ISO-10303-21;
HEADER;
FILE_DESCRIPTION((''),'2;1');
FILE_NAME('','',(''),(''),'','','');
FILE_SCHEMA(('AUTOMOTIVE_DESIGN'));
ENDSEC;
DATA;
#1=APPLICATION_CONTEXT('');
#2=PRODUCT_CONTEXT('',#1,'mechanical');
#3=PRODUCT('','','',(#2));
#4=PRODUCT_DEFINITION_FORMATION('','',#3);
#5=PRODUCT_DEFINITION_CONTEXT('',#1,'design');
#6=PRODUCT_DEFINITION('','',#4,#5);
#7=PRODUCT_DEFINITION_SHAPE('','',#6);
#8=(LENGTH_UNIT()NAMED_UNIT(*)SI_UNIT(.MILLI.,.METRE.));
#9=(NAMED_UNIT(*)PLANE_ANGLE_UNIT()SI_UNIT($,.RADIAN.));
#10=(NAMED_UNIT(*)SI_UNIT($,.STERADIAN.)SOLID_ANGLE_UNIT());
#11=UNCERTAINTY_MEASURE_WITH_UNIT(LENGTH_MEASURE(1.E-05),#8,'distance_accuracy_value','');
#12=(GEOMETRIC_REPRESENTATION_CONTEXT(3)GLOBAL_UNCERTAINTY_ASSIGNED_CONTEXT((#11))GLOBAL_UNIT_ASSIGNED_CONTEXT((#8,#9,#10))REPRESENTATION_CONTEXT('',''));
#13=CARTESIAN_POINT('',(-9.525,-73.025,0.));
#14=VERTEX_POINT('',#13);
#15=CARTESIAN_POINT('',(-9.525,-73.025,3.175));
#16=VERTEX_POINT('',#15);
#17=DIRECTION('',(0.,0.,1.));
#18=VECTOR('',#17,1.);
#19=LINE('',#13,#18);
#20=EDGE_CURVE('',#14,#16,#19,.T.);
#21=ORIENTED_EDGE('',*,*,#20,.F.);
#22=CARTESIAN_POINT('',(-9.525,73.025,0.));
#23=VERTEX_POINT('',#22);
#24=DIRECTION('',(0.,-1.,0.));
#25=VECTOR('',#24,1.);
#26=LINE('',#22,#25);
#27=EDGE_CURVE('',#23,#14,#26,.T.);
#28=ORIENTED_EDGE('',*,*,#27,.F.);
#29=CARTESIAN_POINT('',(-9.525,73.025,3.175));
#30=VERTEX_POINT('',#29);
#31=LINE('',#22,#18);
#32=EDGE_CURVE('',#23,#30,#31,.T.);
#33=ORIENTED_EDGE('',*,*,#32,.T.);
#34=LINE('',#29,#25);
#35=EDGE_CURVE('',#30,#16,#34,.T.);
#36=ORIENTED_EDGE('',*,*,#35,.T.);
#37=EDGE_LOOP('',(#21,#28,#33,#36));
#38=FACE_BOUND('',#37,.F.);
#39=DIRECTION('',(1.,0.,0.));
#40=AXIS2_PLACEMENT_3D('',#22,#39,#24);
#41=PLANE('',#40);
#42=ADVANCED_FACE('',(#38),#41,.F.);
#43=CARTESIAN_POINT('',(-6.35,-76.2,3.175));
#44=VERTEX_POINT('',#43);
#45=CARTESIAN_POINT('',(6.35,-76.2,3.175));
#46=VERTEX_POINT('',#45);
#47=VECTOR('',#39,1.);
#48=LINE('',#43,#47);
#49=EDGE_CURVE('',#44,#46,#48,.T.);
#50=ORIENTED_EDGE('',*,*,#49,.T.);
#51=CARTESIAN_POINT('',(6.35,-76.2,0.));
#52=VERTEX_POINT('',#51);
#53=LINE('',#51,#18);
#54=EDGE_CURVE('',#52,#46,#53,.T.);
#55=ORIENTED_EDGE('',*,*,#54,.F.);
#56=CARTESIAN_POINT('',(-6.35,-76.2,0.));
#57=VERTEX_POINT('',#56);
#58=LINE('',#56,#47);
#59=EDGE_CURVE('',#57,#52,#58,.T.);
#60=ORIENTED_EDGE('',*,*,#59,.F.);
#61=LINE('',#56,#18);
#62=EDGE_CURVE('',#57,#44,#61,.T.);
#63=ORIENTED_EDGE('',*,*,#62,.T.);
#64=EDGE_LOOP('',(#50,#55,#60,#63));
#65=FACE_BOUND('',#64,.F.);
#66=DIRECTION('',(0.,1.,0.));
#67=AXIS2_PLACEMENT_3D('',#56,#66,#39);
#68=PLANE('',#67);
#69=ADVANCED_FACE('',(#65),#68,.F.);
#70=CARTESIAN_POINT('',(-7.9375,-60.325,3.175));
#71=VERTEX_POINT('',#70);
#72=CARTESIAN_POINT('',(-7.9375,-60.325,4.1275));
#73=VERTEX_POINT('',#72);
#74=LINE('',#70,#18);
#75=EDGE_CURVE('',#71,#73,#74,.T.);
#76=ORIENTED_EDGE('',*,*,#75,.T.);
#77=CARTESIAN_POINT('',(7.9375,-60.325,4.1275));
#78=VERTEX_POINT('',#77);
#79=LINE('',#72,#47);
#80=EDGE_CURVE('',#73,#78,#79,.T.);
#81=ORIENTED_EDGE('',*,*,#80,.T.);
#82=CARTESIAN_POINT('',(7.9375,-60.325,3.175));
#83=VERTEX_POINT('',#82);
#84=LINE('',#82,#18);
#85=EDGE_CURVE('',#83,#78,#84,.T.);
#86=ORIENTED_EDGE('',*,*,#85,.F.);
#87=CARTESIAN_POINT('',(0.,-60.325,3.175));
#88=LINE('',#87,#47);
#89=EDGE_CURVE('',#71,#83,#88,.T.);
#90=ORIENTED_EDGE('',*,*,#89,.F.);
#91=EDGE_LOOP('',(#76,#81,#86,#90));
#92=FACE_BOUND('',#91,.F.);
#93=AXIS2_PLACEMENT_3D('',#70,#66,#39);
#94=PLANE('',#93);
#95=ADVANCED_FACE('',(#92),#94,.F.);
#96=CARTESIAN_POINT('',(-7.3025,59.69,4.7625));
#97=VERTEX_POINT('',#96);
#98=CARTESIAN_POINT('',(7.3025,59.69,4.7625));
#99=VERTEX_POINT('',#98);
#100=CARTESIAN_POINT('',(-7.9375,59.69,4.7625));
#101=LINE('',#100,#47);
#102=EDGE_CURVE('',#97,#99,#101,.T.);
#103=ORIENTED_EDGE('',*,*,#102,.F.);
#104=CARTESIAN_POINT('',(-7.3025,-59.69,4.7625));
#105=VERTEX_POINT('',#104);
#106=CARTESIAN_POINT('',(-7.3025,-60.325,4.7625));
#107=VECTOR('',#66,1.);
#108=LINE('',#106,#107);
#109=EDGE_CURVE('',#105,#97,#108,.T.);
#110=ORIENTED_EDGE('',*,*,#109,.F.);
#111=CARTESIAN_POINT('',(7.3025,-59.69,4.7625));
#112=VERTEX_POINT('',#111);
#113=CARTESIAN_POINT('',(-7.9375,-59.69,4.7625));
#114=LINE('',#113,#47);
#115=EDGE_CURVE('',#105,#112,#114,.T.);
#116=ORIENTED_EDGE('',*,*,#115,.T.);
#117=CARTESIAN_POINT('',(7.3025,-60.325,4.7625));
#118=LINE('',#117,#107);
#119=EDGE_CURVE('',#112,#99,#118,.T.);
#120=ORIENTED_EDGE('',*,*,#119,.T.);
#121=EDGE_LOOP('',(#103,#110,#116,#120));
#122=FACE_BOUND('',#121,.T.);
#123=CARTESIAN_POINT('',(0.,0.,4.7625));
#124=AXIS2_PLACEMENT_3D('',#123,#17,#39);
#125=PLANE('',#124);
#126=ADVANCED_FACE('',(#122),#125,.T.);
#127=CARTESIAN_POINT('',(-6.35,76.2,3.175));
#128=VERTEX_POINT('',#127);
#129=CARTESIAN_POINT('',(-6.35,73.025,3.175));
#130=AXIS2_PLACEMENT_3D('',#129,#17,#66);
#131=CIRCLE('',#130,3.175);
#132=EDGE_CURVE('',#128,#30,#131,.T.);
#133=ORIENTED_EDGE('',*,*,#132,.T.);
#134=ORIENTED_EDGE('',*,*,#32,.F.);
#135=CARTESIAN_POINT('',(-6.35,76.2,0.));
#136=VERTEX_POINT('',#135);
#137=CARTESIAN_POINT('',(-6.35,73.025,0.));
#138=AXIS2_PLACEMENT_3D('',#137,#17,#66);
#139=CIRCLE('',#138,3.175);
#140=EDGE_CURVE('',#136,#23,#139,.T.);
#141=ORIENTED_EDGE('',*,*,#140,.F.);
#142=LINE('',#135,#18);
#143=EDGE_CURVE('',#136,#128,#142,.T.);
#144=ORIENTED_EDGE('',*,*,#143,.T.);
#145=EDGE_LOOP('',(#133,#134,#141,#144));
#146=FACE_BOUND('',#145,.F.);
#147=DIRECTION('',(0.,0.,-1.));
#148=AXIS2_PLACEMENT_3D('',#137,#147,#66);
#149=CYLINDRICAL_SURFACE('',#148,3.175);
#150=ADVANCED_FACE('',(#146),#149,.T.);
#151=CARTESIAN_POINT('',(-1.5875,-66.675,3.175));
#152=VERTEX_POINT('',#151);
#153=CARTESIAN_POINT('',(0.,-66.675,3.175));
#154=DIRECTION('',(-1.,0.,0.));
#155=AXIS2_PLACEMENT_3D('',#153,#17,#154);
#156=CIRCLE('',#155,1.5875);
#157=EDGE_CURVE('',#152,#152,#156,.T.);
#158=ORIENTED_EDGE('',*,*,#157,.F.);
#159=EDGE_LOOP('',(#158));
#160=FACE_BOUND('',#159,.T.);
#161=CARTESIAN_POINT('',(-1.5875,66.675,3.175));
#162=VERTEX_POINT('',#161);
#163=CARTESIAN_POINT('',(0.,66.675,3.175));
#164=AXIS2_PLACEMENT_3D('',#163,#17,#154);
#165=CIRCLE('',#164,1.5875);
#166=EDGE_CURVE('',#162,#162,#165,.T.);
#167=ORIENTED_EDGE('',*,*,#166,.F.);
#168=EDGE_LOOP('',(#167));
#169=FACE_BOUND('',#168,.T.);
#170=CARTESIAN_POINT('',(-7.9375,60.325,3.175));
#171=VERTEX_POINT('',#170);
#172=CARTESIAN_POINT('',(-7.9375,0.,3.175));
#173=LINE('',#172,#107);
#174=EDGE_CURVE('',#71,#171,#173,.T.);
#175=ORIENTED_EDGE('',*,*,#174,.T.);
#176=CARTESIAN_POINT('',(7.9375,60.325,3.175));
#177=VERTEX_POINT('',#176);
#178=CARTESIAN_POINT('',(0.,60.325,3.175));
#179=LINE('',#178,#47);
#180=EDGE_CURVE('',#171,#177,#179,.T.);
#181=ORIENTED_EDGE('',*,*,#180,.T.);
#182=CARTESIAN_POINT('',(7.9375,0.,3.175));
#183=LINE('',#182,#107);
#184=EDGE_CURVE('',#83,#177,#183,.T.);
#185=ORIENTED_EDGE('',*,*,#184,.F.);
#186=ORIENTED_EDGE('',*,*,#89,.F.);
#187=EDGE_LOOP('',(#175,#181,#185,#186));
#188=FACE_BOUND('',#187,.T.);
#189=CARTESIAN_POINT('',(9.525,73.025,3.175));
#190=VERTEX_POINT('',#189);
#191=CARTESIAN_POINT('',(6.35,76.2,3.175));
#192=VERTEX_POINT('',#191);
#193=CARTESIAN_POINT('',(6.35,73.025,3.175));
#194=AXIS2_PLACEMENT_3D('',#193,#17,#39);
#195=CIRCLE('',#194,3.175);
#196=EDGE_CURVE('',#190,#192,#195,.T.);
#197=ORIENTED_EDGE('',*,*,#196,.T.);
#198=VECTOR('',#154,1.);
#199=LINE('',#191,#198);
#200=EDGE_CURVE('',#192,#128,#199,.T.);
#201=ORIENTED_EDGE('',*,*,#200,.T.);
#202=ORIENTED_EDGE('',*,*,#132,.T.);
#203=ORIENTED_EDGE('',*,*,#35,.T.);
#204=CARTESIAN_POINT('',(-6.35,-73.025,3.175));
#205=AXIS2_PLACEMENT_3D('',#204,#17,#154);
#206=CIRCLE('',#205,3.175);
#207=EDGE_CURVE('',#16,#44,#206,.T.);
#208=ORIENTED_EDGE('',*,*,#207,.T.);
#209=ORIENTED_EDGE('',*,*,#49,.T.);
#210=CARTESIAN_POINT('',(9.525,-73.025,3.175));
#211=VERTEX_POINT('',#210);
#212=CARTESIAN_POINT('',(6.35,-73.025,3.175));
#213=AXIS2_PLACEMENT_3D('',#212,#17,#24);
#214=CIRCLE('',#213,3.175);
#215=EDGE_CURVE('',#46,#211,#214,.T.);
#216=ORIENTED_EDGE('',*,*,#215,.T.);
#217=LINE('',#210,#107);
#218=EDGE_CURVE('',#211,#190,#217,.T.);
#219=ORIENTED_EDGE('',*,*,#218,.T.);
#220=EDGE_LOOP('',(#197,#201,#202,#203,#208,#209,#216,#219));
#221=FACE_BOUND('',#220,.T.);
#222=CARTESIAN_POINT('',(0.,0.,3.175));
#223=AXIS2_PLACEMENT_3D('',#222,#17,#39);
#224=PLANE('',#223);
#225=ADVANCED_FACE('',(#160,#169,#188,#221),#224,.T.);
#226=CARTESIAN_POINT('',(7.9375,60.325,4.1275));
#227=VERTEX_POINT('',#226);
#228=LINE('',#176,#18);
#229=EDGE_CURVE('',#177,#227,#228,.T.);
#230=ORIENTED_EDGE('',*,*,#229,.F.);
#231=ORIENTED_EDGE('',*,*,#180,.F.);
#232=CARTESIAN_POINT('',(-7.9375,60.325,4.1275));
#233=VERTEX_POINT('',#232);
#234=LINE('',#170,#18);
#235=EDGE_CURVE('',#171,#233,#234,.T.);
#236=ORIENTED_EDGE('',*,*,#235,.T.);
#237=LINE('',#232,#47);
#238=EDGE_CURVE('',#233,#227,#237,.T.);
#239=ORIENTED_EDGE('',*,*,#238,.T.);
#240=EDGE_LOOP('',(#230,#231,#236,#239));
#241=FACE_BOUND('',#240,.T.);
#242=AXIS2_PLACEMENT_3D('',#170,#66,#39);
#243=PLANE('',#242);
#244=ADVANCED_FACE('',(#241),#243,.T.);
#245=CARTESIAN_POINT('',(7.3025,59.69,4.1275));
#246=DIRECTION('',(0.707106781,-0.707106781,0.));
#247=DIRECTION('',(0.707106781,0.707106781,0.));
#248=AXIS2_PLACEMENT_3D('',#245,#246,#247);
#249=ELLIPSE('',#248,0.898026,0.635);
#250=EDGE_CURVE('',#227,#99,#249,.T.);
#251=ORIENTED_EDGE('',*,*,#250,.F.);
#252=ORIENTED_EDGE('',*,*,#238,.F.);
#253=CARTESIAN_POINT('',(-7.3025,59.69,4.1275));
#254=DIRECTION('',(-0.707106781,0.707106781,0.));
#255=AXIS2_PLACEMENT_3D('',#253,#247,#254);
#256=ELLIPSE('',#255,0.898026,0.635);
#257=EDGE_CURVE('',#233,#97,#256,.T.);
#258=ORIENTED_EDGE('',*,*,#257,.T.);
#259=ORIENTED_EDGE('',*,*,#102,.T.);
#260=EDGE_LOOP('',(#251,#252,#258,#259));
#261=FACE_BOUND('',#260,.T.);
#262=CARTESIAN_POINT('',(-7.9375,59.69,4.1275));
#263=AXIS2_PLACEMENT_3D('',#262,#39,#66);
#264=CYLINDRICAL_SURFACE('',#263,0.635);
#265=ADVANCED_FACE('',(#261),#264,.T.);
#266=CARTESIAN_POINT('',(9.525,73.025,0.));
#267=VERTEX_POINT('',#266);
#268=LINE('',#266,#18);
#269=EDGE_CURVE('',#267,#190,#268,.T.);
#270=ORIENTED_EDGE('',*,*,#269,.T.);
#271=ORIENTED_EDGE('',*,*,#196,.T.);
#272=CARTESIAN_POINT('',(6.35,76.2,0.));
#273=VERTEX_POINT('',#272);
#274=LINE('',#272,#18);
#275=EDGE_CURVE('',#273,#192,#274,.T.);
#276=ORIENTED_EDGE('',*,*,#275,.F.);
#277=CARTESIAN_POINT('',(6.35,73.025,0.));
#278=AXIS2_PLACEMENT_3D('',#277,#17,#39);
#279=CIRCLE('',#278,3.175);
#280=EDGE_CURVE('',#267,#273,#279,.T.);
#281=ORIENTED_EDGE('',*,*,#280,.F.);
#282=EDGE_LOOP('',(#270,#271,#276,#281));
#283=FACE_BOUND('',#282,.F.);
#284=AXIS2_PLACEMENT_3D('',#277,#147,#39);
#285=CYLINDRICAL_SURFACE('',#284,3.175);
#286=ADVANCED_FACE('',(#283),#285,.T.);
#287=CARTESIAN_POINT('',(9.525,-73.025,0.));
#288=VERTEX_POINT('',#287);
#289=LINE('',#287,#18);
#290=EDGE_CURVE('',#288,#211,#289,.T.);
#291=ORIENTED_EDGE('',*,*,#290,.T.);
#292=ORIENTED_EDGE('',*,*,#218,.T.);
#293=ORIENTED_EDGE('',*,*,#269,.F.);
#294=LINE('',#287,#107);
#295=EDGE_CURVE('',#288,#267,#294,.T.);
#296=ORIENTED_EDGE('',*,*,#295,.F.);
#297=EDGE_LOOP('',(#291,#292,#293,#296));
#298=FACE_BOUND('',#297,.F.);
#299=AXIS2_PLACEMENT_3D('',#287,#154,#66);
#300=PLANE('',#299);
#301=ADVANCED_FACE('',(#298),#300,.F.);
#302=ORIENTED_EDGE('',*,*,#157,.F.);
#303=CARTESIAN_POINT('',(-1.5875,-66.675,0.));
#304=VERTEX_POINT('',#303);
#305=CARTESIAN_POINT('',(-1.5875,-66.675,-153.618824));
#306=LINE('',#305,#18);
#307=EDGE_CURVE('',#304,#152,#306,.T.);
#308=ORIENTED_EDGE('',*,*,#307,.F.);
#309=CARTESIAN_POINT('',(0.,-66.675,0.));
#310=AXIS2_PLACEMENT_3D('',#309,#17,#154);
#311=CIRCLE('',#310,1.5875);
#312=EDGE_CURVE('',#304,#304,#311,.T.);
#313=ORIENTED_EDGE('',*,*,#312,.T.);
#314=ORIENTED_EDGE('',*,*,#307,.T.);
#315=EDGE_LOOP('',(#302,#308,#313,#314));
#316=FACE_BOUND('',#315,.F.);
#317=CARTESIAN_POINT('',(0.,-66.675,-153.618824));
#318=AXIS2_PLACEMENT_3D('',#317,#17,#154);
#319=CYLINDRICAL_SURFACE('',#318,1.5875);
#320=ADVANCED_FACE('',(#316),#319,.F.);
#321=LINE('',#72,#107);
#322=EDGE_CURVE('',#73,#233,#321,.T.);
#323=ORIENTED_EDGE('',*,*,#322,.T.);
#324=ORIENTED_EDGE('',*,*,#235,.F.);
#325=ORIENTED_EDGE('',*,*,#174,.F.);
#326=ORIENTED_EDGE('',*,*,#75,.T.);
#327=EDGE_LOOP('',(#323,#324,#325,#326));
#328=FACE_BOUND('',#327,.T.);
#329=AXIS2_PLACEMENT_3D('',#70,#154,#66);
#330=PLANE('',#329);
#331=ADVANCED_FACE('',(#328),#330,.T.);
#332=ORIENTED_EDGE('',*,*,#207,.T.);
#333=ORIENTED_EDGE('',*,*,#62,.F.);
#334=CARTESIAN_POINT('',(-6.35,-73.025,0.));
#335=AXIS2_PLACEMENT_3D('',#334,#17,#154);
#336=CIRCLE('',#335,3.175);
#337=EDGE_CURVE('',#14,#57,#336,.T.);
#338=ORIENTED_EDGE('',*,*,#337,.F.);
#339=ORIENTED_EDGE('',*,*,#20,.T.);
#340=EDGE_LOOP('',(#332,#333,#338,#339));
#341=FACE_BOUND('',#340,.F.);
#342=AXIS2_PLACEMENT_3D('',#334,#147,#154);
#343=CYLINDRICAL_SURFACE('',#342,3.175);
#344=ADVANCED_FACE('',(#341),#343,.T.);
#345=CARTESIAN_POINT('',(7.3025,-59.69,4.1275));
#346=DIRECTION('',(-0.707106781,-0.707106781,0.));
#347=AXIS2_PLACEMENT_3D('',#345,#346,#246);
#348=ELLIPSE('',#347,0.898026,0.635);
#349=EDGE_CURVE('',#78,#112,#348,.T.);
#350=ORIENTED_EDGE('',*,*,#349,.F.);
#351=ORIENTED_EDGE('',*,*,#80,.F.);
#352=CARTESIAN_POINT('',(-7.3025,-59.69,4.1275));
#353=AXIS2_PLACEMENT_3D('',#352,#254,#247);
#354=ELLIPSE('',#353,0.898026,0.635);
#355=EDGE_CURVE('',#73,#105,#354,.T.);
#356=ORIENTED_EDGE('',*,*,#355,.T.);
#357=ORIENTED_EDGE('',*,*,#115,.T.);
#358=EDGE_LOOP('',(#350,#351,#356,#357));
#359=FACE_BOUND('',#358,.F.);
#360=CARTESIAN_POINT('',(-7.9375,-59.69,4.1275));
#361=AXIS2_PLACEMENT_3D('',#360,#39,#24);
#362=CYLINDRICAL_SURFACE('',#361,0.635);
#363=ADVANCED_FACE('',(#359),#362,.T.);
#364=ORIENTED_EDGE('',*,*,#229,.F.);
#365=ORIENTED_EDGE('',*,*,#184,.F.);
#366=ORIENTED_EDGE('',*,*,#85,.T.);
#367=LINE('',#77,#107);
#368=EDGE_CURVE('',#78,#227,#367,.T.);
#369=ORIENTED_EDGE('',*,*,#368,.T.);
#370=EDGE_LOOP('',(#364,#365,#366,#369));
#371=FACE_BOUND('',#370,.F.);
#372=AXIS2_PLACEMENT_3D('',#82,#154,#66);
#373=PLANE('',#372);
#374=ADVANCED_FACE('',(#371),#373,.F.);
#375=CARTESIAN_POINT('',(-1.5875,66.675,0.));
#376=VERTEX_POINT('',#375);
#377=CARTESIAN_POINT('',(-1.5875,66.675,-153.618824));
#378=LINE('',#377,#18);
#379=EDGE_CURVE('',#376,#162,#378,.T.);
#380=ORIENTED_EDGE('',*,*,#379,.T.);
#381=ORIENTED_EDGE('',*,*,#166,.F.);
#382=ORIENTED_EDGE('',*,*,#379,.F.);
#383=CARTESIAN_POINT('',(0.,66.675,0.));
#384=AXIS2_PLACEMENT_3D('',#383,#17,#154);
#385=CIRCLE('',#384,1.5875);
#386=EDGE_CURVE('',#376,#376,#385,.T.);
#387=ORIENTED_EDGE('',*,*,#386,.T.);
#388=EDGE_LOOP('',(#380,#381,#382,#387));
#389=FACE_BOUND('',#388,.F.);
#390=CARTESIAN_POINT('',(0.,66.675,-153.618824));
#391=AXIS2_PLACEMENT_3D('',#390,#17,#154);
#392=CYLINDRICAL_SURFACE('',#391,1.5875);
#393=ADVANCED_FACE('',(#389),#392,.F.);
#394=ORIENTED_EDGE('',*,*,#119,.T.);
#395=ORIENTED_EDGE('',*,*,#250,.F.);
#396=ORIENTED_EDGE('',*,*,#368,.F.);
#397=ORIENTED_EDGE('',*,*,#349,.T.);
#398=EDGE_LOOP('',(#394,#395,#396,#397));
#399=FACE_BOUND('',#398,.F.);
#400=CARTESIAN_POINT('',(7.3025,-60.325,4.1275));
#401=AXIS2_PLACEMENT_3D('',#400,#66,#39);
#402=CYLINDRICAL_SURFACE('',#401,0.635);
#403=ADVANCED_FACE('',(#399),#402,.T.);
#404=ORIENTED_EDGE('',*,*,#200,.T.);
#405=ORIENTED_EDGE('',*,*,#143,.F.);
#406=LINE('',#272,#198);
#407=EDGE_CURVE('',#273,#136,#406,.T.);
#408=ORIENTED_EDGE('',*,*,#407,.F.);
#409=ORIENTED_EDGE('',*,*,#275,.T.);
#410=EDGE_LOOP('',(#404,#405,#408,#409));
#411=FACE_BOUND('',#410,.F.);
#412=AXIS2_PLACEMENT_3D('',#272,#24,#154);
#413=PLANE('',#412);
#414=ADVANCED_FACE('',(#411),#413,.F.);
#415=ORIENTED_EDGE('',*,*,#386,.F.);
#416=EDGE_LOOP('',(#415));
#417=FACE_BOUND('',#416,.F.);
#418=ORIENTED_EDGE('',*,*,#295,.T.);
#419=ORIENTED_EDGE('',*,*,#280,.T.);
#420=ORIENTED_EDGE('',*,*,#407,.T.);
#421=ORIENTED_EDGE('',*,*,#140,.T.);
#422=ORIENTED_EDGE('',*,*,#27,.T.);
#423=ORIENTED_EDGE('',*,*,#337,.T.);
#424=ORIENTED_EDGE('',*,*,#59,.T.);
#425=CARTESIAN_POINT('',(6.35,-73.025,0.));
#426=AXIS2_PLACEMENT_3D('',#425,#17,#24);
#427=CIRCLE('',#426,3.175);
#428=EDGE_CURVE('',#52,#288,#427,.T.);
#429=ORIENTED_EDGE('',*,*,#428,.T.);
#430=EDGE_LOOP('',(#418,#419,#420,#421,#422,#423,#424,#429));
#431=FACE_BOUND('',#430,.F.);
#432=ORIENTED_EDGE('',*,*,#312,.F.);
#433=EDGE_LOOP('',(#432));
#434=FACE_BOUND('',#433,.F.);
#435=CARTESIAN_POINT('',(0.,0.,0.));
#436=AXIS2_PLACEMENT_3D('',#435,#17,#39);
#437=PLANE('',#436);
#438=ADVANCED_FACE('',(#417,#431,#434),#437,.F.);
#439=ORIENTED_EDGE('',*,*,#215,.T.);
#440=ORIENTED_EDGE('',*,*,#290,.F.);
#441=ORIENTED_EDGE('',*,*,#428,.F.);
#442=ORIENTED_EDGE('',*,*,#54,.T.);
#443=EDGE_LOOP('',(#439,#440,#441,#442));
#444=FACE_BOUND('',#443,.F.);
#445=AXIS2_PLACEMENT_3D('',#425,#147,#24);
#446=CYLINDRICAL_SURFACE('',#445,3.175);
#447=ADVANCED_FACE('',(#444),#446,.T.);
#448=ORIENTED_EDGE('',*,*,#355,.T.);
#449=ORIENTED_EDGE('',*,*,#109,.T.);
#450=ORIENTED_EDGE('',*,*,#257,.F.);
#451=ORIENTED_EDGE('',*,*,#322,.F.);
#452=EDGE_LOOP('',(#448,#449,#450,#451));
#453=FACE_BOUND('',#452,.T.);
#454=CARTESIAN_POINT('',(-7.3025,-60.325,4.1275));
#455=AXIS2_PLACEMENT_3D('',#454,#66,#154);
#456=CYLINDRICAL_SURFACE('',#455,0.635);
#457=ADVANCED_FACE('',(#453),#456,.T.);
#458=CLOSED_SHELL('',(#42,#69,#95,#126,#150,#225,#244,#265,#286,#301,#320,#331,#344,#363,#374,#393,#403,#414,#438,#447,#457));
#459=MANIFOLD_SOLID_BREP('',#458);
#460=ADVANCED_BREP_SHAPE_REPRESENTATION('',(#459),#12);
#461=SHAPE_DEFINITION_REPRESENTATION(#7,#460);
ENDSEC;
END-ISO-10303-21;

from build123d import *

# Parameters (mm, degrees)
F1_DEPTH = 3.175
F2_D     = 3.175
F3_W     = 15.875
F3_H     = 120.65
F4_DEPTH = 1.5875
F5_R     = 0.635


# Not quite as in the source:
# - a feature names something its author has since deleted; it is built from what else it names


with BuildPart() as f1:
    # F0 (on Top) → F1 (new body)
    with BuildSketch(Plane.XY):
        with BuildLine():
            Line((6.35, 76.2), (-6.35, 76.2))
            ThreePointArc((-6.35, 76.2), (-8.5950640303, 75.2700640303), (-9.525, 73.025))
            Line((-9.525, 73.025), (-9.525, -73.025))
            ThreePointArc((-9.525, -73.025), (-8.5950640303, -75.2700640303), (-6.35, -76.2))
            Line((-6.35, -76.2), (6.35, -76.2))
            ThreePointArc((6.35, -76.2), (8.5950640303, -75.2700640303), (9.525, -73.025))
            Line((9.525, -73.025), (9.525, 73.025))
            ThreePointArc((9.525, 73.025), (8.5950640303, 75.2700640303), (6.35, 76.2))
        make_face()
    extrude(amount=F1_DEPTH)

    # F2 (through all)
    with Locations(Plane(origin=(0, 0, 0), x_dir=(1, 0, 0), z_dir=(0, 0, -1))):
        with Locations((0, 66.675), (0, -66.675)):
            Hole(F2_D / 2)

    # F3 (on face) → F4 (join)
    with BuildSketch(Plane.XY.offset(3.175)):
        Rectangle(F3_W, F3_H)
    extrude(amount=F4_DEPTH)

    # F5
    f5_edges = [f1.edges().sort_by_distance(p)[0] for p in [
        (0, -60.325, 4.7625),
        (7.9375, 0, 4.7625),
        (-7.9375, 0, 4.7625),
        (0, 60.325, 4.7625),
    ]]
    fillet(f5_edges, radius=F5_R)


solid = f1.part
